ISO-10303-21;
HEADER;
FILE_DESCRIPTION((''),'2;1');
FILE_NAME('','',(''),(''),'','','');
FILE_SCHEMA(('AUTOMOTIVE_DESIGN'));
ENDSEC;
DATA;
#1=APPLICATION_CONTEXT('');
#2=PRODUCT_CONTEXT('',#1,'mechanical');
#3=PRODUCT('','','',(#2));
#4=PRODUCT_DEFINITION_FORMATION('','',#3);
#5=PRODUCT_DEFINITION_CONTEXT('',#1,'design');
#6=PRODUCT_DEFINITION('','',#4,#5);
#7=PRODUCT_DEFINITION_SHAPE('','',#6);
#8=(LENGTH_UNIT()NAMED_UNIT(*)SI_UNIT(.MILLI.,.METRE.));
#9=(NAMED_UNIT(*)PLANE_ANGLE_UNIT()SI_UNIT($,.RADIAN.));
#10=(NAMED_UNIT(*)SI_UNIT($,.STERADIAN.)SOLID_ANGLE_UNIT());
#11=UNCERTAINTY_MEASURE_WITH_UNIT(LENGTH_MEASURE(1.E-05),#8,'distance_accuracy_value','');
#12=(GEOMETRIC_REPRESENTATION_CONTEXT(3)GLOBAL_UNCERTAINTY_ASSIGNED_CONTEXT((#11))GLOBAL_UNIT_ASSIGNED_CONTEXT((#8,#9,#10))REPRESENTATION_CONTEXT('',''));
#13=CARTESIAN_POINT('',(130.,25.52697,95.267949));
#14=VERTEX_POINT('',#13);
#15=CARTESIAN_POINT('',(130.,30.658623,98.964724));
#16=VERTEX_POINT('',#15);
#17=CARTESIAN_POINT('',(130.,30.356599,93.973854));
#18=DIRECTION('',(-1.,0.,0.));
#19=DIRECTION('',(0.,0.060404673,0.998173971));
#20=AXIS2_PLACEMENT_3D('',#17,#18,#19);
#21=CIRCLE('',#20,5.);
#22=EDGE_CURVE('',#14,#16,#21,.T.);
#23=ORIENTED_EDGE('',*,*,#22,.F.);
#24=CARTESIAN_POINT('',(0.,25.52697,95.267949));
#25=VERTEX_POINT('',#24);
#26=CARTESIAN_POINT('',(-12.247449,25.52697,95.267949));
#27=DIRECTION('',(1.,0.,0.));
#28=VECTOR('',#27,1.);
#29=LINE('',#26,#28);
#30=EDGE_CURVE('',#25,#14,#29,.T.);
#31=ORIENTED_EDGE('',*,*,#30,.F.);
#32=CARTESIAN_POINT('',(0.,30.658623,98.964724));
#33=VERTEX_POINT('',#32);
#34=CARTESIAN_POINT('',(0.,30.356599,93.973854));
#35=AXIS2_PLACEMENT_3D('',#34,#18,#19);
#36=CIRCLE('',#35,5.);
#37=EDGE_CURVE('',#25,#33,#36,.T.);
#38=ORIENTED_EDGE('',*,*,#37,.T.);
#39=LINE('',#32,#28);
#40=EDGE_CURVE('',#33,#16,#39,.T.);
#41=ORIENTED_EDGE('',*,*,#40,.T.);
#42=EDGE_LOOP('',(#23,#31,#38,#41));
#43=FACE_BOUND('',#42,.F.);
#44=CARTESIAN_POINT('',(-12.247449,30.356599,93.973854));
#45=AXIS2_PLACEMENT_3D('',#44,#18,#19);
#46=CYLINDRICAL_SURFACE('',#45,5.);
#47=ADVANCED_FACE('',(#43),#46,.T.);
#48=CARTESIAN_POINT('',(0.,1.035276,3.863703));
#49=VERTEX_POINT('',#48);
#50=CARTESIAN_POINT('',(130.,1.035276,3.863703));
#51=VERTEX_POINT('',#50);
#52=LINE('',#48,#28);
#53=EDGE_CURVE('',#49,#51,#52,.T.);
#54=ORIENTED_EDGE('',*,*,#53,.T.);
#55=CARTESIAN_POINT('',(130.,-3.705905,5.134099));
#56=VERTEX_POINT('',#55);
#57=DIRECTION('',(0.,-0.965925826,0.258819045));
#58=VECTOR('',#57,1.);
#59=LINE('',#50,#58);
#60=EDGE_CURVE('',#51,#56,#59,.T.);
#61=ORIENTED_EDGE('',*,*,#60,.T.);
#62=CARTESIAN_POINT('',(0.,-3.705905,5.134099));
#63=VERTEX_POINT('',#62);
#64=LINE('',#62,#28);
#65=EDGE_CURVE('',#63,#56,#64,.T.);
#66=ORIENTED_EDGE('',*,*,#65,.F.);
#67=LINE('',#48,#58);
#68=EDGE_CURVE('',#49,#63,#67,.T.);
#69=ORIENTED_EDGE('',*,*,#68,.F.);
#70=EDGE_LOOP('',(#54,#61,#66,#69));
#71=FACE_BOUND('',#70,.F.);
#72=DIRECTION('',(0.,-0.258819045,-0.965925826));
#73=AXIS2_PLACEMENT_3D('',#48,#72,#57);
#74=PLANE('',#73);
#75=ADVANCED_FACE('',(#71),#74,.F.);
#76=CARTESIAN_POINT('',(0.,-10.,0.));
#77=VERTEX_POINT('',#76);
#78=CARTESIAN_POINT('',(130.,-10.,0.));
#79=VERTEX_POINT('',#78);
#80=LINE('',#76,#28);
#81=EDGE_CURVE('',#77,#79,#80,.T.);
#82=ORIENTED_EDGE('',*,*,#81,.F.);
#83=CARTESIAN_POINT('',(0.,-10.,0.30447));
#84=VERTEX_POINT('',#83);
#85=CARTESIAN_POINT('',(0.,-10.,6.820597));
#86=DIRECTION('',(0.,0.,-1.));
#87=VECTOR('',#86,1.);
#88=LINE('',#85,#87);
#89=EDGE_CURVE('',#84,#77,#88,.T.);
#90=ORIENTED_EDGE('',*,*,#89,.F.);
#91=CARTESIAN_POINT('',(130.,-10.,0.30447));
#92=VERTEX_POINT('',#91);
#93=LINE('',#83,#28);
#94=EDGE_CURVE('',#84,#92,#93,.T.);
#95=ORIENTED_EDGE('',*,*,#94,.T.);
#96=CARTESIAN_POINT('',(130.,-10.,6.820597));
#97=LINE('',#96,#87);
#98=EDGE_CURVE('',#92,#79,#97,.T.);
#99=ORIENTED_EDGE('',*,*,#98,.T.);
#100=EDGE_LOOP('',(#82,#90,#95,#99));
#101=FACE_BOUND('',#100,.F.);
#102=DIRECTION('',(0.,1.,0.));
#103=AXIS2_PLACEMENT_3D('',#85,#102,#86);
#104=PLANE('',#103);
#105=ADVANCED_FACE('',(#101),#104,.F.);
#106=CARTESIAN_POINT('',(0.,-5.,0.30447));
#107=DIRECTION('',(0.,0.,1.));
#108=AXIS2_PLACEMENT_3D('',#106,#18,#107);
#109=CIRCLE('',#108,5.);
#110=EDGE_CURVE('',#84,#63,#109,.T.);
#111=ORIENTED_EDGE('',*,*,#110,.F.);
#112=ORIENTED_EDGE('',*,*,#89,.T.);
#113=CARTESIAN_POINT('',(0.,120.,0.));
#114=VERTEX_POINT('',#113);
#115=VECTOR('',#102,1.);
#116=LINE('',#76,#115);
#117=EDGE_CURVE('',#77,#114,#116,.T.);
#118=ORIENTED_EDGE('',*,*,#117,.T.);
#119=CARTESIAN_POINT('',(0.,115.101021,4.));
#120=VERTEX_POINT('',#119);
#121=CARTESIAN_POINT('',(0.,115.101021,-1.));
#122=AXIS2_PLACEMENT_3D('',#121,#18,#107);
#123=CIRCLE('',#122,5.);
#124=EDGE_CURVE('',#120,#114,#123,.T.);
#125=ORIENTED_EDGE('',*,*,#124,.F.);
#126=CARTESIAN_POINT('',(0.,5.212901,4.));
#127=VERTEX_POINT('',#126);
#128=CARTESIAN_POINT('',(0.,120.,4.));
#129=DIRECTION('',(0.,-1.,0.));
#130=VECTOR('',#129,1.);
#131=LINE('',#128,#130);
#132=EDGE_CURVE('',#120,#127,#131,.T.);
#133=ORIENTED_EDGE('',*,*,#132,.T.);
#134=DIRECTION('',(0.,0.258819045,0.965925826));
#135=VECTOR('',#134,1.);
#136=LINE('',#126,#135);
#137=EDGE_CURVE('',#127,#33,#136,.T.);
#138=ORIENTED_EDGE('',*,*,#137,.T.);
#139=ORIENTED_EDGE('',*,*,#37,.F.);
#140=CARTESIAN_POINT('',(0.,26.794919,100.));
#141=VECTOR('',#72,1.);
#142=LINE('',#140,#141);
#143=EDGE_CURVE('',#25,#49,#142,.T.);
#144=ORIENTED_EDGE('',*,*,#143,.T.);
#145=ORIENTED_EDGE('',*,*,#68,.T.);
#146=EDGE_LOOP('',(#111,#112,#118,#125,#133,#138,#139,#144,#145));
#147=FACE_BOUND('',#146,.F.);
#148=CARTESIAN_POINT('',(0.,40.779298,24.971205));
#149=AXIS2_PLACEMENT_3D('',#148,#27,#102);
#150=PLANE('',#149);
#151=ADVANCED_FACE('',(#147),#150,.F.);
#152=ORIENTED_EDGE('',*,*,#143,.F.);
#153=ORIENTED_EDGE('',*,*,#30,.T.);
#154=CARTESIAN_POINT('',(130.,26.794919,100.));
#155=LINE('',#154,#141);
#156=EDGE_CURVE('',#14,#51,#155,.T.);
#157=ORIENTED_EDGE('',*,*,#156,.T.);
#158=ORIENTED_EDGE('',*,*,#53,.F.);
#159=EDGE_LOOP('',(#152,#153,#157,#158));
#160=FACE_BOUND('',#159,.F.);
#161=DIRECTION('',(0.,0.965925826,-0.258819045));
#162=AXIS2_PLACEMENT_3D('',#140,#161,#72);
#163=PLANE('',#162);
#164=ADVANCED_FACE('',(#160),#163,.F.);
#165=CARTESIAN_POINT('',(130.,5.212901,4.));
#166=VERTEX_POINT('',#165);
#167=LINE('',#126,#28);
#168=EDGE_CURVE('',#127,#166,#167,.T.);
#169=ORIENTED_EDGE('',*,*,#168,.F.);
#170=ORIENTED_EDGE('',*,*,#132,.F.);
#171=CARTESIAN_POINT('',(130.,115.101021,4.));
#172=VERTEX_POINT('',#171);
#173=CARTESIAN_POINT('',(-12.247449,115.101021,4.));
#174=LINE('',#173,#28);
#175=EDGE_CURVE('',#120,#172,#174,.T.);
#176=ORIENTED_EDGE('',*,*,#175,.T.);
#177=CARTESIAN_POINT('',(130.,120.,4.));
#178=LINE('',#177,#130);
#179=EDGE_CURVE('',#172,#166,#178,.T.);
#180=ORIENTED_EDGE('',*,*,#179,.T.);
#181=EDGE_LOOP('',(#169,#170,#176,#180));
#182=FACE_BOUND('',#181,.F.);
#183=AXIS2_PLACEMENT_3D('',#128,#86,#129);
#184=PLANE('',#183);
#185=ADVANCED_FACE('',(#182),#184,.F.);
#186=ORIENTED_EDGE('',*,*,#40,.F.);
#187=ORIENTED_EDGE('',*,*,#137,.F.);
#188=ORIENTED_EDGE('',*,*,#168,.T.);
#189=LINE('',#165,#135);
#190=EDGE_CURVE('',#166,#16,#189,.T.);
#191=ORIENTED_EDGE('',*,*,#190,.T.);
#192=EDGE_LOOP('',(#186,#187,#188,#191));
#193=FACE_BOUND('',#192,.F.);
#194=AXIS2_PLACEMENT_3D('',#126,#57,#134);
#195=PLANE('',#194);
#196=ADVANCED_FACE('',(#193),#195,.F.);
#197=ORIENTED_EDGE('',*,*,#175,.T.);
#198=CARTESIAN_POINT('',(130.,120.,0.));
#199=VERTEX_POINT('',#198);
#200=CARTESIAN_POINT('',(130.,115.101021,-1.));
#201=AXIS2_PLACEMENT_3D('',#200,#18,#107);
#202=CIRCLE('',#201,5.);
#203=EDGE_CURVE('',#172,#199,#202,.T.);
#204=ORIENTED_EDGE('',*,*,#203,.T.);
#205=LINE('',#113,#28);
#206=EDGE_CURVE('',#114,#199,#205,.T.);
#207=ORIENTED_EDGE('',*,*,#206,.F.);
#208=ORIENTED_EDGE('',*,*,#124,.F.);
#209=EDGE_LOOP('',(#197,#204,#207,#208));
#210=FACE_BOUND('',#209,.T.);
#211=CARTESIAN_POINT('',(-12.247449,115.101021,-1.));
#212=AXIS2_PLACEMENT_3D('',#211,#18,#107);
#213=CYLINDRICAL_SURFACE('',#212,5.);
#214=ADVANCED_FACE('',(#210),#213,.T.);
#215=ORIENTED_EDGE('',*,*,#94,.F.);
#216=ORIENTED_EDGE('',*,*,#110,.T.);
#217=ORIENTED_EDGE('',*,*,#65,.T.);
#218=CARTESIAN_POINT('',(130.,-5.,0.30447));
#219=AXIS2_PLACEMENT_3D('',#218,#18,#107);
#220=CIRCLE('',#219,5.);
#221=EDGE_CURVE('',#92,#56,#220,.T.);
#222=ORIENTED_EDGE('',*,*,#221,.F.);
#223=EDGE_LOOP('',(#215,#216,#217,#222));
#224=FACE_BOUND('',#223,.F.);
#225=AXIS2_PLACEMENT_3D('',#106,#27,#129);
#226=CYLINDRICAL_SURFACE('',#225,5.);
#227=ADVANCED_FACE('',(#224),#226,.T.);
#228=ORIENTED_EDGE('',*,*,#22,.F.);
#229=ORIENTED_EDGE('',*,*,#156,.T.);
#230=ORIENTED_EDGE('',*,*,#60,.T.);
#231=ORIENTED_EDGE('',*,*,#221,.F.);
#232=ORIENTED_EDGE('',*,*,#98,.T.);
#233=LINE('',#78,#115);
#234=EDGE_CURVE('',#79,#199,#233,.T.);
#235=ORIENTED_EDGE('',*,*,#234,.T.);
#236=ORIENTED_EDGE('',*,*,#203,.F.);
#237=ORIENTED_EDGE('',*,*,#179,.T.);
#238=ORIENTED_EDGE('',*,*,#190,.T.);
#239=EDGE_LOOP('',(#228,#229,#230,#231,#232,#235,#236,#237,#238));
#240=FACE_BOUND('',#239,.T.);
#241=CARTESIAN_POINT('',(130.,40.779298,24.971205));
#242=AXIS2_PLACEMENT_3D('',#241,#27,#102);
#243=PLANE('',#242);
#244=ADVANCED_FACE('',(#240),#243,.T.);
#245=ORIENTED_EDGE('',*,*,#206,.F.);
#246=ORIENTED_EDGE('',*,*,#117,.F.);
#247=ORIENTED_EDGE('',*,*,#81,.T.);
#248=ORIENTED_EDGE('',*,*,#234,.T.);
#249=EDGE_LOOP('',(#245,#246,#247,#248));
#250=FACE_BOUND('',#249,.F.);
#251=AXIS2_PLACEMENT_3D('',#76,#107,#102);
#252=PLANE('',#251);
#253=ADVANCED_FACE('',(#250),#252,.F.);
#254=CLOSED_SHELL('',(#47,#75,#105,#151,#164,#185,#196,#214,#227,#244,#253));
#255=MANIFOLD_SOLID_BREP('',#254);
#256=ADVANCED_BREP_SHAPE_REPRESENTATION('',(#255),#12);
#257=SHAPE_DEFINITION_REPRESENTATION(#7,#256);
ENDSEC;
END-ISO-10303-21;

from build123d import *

# Parameters (mm, degrees)
F1_DEPTH    = 130
F2_T1_DEPTH = 154.4948974279
F3_T1_DEPTH = 154.4948974279
F4_R        = 5


# Not quite as in the source:
# - a fillet or chamfer that OpenCascade refuses, or shapes differently, is made with other operations: its cross-section is extruded or revolved along the edge and cut away or added


with BuildPart() as f1:
    # F0 (on Right) → F1 (new body)
    with BuildSketch(Plane.YZ):
        Polygon((1.0352761804, 3.8637033052), (0, 0), (120, 0), (120, 4), (5.2129014914, 4), (30.6586225483, 98.9647238196), (26.7949192431, 100), align=None)
        Polygon((-10, 0), (0, 0), (1.0352761804, 3.8637033052), (-10, 6.820596646), (-10, 4.0079755444), align=None)
    extrude(amount=F1_DEPTH)

    # F2: fillet of radius 5 on 1 edges, made by hand

    # F2_s2 → F2_t1 (cut)
    with BuildSketch(Plane.YZ.offset(-12.2474487139)):
        with BuildLine():
            ThreePointArc((30.6586225483, 98.9647238196), (27.4340422276, 98.0307814801), (25.5269700507, 95.2679491924))
            Line((25.5269700507, 95.2679491924), (26.7949192431, 100))
            Line((26.7949192431, 100), (30.6586225483, 98.9647238196))
        make_face()
    extrude(amount=F2_T1_DEPTH, mode=Mode.SUBTRACT)

    # F3: fillet of radius 5 on 1 edges, made by hand

    # F3_s2 → F3_t1 (cut)
    with BuildSketch(Plane.YZ.offset(-12.2474487139)):
        with BuildLine():
            ThreePointArc((115.1010205144, 4), (118.2632981746, 2.8729833462), (120, 0))
            Line((120, 0), (120, 4))
            Line((120, 4), (115.1010205144, 4))
        make_face()
    extrude(amount=F3_T1_DEPTH, mode=Mode.SUBTRACT)

    # F4
    f4_edges = [f1.edges().sort_by_distance(p)[0] for p in [
        (65, -10, 6.820597),
    ]]
    fillet(f4_edges, radius=F4_R)


solid = f1.part
